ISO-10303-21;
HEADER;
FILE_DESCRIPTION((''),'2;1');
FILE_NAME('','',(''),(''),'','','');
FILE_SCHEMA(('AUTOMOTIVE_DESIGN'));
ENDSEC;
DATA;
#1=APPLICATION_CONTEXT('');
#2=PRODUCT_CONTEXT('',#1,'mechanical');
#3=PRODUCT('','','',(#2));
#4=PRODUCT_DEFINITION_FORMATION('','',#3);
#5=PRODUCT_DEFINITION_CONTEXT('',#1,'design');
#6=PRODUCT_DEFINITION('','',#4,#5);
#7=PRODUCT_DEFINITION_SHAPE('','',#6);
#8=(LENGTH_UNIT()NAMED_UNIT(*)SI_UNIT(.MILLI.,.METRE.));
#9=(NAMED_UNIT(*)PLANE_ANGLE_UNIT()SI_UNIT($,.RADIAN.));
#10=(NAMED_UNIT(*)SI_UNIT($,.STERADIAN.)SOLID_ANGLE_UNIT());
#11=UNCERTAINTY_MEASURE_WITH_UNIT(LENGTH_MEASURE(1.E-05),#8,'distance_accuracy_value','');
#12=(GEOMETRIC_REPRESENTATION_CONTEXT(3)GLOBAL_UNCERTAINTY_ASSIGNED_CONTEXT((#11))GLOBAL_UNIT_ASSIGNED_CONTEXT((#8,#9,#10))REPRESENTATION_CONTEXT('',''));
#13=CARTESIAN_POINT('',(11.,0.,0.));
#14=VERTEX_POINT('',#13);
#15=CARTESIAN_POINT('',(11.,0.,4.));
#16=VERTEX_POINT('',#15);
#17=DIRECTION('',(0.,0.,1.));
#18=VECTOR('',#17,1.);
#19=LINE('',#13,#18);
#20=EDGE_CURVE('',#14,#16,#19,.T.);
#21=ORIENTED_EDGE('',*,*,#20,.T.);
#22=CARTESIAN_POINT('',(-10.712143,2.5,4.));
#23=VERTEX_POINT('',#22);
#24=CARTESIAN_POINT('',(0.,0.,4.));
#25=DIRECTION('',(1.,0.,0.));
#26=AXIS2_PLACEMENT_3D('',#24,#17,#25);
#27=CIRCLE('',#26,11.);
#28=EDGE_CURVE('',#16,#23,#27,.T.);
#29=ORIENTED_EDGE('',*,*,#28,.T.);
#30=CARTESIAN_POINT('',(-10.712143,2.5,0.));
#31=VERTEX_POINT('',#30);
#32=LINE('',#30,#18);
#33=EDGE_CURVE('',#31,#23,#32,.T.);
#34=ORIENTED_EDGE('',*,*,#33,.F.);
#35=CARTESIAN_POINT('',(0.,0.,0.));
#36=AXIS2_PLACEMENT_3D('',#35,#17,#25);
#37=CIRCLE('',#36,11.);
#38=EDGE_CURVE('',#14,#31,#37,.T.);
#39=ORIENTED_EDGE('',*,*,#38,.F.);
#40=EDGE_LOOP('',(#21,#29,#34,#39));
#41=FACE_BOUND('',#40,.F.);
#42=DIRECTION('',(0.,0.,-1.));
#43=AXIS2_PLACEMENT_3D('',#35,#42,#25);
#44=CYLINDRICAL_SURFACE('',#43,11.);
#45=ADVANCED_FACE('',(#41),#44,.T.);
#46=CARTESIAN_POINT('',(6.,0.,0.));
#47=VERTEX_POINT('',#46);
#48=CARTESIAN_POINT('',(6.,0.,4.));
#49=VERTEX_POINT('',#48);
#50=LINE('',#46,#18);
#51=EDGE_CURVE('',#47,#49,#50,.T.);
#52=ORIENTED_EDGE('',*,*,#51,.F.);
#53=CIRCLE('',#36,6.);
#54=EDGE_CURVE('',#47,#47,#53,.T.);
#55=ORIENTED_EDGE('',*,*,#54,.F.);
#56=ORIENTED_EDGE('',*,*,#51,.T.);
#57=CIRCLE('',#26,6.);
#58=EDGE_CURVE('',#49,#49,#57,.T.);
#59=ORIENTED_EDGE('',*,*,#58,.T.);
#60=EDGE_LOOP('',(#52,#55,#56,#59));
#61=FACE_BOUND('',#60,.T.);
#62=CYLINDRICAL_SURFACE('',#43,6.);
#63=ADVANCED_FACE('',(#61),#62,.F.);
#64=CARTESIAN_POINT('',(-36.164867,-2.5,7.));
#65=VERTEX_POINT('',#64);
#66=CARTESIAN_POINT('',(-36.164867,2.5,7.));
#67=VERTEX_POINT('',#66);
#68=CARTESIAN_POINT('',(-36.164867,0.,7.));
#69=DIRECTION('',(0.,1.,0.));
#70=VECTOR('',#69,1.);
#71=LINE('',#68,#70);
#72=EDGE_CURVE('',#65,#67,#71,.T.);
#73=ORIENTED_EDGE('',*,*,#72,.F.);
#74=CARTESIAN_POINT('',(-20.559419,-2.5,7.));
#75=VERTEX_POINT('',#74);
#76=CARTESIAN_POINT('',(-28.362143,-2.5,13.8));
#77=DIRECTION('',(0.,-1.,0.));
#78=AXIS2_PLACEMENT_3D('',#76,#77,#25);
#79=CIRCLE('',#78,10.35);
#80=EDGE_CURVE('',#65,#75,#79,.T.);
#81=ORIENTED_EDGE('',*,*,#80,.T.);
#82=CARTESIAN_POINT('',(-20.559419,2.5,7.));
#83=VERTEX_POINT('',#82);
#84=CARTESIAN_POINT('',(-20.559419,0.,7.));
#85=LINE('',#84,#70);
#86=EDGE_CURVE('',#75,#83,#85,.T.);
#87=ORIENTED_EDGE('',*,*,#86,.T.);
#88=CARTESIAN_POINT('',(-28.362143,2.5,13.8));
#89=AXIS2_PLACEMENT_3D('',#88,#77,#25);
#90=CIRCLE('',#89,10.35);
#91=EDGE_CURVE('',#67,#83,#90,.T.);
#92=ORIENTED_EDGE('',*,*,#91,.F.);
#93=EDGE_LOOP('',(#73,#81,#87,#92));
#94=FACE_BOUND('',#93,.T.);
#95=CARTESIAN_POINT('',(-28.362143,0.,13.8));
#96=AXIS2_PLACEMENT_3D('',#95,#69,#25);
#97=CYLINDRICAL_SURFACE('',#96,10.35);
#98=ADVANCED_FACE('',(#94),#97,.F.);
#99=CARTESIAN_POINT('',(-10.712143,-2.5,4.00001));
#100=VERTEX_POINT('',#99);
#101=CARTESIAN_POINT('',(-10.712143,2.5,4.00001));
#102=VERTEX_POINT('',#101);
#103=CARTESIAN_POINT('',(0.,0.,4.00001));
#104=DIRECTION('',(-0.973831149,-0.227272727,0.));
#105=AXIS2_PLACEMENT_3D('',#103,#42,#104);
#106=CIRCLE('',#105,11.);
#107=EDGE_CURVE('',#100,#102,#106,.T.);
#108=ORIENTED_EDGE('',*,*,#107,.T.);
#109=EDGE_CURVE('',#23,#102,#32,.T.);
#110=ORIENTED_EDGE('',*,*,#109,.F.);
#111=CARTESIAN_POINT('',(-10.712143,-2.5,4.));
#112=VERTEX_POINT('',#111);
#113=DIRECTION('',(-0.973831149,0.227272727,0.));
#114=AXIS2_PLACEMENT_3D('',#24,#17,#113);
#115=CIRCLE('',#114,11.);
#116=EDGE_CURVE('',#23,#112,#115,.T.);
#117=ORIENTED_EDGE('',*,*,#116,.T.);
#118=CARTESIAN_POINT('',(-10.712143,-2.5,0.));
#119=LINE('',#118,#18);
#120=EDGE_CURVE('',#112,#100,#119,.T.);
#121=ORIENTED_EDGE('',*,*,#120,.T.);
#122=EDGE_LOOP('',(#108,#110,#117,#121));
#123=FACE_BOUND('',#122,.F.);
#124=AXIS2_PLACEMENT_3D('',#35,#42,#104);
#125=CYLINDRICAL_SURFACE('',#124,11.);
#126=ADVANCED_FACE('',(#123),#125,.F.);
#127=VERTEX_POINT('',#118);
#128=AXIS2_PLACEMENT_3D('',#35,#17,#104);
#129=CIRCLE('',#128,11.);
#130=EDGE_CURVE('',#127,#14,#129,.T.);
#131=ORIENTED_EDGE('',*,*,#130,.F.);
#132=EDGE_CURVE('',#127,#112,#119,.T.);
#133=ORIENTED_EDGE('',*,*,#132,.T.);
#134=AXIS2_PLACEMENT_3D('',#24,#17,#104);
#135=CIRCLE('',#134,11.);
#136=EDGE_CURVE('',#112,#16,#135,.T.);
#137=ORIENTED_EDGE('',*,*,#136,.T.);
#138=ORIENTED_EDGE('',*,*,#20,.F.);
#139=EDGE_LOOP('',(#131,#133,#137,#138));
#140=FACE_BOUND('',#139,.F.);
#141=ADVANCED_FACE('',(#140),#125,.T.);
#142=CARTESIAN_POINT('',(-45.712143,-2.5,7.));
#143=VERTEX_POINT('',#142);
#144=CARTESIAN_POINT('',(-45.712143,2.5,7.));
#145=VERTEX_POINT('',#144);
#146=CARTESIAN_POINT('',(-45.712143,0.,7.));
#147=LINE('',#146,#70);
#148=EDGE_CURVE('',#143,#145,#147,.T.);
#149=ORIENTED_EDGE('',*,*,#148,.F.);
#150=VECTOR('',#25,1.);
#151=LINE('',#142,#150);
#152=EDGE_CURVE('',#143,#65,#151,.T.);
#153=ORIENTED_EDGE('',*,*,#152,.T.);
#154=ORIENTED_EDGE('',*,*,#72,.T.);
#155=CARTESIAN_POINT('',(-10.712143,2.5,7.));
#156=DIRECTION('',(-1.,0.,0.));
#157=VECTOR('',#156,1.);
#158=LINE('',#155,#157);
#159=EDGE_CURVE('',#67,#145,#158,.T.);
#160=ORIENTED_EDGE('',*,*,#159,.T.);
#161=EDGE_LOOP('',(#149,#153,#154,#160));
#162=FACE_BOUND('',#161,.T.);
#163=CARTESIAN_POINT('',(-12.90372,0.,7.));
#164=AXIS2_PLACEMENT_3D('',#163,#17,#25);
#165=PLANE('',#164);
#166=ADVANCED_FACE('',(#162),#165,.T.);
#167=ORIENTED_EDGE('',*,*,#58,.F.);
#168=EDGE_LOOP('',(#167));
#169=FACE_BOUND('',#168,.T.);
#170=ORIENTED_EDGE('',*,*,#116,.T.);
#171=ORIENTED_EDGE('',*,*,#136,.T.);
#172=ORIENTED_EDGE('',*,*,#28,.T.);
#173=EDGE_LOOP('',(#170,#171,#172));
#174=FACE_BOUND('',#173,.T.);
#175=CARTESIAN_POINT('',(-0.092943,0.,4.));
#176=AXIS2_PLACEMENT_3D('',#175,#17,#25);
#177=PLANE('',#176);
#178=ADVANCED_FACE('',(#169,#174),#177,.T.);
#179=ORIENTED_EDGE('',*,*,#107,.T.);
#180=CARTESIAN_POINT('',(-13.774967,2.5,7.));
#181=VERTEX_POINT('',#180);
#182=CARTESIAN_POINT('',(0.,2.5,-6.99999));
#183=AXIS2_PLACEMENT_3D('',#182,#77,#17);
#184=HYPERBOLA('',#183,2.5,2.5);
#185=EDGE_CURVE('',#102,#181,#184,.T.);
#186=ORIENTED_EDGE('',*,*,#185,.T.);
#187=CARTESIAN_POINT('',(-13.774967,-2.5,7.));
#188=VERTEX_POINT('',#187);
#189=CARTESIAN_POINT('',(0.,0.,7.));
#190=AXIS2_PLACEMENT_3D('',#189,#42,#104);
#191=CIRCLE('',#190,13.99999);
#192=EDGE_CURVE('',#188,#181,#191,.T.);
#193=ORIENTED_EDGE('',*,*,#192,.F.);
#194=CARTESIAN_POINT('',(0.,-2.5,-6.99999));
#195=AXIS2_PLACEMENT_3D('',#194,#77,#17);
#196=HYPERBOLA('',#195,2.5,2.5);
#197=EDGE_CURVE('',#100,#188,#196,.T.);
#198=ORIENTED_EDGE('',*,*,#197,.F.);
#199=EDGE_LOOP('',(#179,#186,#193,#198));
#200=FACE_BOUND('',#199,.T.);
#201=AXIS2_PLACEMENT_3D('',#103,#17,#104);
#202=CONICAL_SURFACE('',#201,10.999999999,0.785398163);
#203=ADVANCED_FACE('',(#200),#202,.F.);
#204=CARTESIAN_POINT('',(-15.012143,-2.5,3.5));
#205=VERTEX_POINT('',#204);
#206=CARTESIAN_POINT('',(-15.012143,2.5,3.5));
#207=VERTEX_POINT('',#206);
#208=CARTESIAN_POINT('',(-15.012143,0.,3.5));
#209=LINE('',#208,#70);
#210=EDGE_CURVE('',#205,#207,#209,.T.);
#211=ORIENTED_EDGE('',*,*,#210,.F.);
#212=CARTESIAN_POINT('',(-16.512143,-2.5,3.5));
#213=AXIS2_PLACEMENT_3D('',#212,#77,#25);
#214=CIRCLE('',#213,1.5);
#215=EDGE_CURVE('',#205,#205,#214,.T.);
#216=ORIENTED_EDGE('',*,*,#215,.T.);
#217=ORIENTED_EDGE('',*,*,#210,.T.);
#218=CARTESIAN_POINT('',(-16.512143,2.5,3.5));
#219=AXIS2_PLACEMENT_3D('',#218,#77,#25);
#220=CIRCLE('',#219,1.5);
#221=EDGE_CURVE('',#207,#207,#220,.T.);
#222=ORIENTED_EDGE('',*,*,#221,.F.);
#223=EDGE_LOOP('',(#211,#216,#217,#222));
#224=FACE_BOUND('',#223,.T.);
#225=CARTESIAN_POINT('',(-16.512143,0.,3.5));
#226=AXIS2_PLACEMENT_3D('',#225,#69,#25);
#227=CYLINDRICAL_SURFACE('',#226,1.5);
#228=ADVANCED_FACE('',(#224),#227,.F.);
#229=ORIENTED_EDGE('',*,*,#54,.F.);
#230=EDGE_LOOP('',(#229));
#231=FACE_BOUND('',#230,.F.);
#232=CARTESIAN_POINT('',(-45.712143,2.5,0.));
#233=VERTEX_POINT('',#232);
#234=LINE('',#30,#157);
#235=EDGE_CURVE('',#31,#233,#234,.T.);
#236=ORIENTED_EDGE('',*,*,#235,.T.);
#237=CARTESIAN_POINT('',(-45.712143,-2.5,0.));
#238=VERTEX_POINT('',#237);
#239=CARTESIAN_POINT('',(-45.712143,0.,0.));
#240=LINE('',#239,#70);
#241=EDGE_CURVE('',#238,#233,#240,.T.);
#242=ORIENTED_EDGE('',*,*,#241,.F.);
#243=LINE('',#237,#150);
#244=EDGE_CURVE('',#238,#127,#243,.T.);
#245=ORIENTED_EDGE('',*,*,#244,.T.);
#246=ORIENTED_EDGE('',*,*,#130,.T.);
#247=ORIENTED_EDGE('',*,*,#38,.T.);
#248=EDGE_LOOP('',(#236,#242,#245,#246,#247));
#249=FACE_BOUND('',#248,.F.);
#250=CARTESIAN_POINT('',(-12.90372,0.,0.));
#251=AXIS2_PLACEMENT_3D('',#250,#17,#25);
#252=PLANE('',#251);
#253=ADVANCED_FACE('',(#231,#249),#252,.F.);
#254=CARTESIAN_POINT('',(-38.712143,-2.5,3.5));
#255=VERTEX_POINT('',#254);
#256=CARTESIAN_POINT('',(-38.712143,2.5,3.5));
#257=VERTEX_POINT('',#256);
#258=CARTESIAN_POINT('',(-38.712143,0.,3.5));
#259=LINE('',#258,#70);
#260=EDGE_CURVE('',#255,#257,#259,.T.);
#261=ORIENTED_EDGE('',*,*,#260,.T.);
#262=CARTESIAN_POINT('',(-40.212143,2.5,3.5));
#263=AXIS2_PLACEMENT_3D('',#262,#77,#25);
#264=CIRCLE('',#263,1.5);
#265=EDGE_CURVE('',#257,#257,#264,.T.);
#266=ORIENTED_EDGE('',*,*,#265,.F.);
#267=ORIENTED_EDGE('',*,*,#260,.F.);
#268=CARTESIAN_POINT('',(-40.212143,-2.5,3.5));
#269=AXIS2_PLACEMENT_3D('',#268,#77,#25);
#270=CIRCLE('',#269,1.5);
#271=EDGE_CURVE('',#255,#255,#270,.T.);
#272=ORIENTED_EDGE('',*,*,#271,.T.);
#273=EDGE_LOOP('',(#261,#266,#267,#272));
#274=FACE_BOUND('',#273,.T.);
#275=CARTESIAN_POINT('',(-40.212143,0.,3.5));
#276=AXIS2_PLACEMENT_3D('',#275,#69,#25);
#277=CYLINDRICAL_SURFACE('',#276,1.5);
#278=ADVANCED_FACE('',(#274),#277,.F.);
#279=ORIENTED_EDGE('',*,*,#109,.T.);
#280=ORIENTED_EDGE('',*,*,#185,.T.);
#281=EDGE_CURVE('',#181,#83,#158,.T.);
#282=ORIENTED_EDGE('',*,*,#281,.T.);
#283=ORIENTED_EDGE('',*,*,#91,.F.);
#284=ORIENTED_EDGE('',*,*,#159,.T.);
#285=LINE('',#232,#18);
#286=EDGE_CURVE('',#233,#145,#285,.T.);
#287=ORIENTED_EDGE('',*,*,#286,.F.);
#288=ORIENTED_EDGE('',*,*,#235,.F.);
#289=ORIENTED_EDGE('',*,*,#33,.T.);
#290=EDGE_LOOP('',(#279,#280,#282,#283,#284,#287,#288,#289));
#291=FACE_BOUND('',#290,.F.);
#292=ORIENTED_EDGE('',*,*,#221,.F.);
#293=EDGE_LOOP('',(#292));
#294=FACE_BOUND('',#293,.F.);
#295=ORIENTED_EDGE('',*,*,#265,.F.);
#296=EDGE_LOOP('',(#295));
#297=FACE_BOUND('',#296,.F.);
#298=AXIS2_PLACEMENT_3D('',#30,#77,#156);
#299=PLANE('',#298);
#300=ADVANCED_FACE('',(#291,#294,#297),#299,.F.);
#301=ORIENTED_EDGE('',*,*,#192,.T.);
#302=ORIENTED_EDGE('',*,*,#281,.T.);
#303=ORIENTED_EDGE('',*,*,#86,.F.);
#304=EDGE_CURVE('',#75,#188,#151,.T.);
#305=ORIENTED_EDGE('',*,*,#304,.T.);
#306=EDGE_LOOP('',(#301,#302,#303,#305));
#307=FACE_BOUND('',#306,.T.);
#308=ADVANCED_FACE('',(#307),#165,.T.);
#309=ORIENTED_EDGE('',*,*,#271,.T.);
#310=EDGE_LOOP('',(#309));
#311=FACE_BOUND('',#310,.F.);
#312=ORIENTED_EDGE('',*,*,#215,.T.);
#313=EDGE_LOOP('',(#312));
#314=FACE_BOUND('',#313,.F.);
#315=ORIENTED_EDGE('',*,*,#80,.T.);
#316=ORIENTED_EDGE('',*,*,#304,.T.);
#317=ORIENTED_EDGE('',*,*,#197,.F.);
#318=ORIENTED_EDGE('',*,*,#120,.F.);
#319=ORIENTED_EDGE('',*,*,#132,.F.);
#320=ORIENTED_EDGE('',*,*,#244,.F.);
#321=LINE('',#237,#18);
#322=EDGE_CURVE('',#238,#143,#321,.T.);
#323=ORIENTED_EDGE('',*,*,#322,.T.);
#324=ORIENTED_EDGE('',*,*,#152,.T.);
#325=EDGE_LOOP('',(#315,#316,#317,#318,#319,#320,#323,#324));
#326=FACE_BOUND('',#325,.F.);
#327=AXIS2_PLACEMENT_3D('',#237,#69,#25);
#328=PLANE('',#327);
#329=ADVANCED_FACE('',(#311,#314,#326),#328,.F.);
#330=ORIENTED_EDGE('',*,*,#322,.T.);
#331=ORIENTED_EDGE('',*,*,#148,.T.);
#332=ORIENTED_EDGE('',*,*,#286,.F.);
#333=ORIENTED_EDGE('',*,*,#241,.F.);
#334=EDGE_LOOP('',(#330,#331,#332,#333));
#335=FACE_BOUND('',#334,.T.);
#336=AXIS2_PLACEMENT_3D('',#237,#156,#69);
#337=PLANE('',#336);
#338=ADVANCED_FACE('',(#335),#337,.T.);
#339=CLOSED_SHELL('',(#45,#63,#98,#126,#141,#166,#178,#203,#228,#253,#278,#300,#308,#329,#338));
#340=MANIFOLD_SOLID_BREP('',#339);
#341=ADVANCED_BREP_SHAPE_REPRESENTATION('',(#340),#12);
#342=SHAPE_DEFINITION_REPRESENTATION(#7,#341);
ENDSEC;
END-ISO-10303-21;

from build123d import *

# Parameters (mm, degrees)
F0_R     = 6
F1_DEPTH = 4
F0_W     = 1.5
F0_H     = 5
F0_W_2   = 10.35
F0_W_3   = 4
F2_DEPTH = 7
F6_SIZE  = 2.99999


# Not quite as in the source:
# - a fillet or chamfer is up to 0.001 mm smaller than in the source, because OpenCascade refuses the exact size


with BuildPart() as f1:
    # F0 (on Top) → F1 (new body)
    with BuildSketch(Plane.XY):
        with BuildLine():
            ThreePointArc((-10.7121426428, -2.5), (1.258258902, -10.9277987049), (11, 0))
            ThreePointArc((11, 0), (1.258258902, 10.9277987049), (-10.7121426428, 2.5))
            ThreePointArc((-10.7121426428, 2.5), (-11, 0), (-10.7121426428, -2.5))
        make_face()
        Circle(F0_R, mode=Mode.SUBTRACT)
    extrude(amount=F1_DEPTH)

    # F0 (on Top) → F2 (join)
    with BuildSketch(Plane.XY):
        with BuildLine():
            ThreePointArc((-10.7121426428, -2.5), (-11, 0), (-10.7121426428, 2.5))
            Line((-10.7121426428, 2.5), (-15.0121426428, 2.5))
            Line((-15.0121426428, 2.5), (-15.0121426428, -2.5))
            Line((-15.0121426428, -2.5), (-10.7121426428, -2.5))
        make_face()
        with Locations((-15.7621426428, 0)):
            Rectangle(F0_W, F0_H)
        with Locations((-17.2621426428, 0)):
            Rectangle(F0_W, F0_H)
        with Locations((-33.5371426428, 0)):
            Rectangle(F0_W_2, F0_H)
        with Locations((-39.4621426428, 0)):
            Rectangle(F0_W, F0_H)
        with Locations((-40.9621426428, 0)):
            Rectangle(F0_W, F0_H)
        with Locations((-43.7121426428, 0)):
            Rectangle(F0_W_3, F0_H)
        with Locations((-23.1871426428, 0)):
            Rectangle(F0_W_2, F0_H)
    extrude(amount=F2_DEPTH)

    # F6 (size 3 in the source; OpenCascade refuses exactly that, so slightly less here)
    f6_edges = [f1.edges().sort_by_distance(p)[0] for p in [
        (-11, 0, 7),
    ]]
    chamfer(f6_edges, length=F6_SIZE)


with BuildPart() as f3:
    # F0 (on Top) → F3 (revolve)
    with BuildSketch(Plane.XY):
        with Locations((-15.7621426428, 0)):
            Rectangle(F0_W, F0_H)
    revolve(axis=Axis((-16.5121426428, 0, 0), (0, -1, 0)))


with BuildPart() as f4:
    # F0 (on Top) → F4 (revolve)
    with BuildSketch(Plane.XY):
        with Locations((-39.4621426428, 0)):
            Rectangle(F0_W, F0_H)
    revolve(axis=Axis((-40.2121426428, 0, 0), (0, -1, 0)))


with BuildPart() as f4_1:
    # F5: moved
    add(f4.part.moved(Location((0, 0, 3.5))))


with BuildPart() as f3_1:
    # F5: moved
    add(f3.part.moved(Location((0, 0, 3.5))))


with BuildPart() as f7:
    # F0 (on Top) → F7 (revolve)
    with BuildSketch(Plane.XY):
        with Locations((-23.1871426428, 0)):
            Rectangle(F0_W_2, F0_H)
    revolve(axis=Axis((-28.3621426428, 0, 0), (0, -1, 0)))


with BuildPart() as f7_1:
    # F8: moved
    add(f7.part.moved(Location((0, 0, 13.8))))


with BuildPart() as f1_1:
    add(f1.part)

    # F9: cut F4, F7, F3
    add(f4_1.part, mode=Mode.SUBTRACT)
    add(f7_1.part, mode=Mode.SUBTRACT)
    add(f3_1.part, mode=Mode.SUBTRACT)


solid = f1_1.part
